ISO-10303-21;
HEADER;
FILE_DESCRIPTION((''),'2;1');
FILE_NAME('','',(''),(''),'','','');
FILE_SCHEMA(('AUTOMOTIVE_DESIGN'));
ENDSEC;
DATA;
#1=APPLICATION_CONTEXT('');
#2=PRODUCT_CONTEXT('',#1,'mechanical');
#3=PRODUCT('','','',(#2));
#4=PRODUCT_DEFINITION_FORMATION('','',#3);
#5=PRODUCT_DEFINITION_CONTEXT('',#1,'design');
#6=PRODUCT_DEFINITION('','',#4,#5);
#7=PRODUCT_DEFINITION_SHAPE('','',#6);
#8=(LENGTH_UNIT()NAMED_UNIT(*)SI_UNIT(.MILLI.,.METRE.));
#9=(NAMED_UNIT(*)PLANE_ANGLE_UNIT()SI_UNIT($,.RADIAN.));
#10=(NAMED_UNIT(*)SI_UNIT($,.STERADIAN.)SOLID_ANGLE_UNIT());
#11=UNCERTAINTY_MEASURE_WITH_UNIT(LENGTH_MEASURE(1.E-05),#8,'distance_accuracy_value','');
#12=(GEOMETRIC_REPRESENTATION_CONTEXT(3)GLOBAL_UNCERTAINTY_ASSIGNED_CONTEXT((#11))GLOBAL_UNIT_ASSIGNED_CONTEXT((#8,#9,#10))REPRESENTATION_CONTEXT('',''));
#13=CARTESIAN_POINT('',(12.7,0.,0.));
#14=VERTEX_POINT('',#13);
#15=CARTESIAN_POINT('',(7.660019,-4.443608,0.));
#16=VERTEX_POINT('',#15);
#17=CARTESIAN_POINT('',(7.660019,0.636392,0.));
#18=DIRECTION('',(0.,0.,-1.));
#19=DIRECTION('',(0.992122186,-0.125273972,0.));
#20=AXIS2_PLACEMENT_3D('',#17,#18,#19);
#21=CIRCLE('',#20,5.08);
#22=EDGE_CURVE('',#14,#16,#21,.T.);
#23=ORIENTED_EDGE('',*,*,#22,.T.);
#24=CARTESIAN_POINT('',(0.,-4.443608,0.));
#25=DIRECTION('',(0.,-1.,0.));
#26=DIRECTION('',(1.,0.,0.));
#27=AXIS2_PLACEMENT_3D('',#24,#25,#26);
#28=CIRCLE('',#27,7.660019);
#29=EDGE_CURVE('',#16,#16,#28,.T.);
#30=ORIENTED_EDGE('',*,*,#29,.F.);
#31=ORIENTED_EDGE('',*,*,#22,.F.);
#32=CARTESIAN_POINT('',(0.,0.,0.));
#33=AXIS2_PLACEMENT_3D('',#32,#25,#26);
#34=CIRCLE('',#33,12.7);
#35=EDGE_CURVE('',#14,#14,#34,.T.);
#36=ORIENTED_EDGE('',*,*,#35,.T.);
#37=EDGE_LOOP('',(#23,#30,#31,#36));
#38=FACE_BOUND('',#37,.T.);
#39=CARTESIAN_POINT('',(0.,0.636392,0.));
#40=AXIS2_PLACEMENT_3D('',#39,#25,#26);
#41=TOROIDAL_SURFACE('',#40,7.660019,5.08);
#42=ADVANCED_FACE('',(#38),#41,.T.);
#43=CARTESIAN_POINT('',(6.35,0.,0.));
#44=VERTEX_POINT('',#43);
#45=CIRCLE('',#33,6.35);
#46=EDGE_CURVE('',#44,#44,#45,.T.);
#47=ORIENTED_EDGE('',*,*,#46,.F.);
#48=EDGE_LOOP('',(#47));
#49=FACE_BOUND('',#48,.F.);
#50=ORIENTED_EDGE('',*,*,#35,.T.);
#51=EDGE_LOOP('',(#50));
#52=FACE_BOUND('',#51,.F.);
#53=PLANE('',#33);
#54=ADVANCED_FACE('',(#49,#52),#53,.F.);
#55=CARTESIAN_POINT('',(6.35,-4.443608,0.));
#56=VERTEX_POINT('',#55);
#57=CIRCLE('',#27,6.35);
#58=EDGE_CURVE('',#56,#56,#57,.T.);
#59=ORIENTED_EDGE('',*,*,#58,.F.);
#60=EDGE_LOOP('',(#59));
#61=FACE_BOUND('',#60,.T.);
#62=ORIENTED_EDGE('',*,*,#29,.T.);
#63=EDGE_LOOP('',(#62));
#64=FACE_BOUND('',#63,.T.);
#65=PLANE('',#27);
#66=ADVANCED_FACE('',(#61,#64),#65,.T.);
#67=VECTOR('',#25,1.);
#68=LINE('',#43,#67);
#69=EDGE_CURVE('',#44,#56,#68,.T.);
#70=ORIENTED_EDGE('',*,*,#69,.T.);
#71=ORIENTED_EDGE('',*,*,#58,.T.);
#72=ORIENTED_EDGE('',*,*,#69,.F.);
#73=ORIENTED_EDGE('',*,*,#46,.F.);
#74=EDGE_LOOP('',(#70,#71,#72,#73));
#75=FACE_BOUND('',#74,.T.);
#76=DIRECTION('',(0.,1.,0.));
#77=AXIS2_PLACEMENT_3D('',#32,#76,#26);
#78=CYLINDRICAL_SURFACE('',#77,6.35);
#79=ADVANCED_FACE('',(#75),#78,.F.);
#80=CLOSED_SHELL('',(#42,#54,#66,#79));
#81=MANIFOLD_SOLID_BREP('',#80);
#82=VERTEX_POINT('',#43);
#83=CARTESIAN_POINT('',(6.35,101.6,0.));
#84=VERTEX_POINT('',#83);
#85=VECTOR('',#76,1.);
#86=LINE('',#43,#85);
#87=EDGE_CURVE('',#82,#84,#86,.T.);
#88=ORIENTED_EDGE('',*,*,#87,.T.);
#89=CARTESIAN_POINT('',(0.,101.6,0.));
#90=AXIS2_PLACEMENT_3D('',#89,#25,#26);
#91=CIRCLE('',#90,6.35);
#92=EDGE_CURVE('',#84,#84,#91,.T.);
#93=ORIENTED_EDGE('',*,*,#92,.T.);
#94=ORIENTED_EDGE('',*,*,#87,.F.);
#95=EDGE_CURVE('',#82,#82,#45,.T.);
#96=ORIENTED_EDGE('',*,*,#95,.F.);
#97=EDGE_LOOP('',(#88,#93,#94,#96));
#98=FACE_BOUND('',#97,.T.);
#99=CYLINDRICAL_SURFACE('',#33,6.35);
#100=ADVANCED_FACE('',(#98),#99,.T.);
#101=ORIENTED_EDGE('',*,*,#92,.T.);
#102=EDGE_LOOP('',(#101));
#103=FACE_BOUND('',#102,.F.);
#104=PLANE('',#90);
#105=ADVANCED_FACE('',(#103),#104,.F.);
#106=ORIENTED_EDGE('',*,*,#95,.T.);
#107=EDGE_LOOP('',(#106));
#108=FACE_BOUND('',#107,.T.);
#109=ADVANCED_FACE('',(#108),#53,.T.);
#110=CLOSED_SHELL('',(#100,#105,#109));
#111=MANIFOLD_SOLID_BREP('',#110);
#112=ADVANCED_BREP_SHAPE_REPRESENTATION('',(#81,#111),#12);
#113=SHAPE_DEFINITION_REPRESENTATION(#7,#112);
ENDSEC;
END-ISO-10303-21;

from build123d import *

# Parameters (mm, degrees)
F0_R     = 12.7
F0_R_2   = 6.35
F1_DEPTH = 4.4436082244
F3_R     = 6.35
F4_DEPTH = 101.6


# Not quite as in the source:
# - a fillet or chamfer that OpenCascade refuses, or shapes differently, is made with other operations: its cross-section is extruded or revolved along the edge and cut away or added


with BuildPart() as f1:
    # F0 (on Front) → F1 (new body)
    with BuildSketch(Plane.XZ):
        Circle(F0_R)
        Circle(F0_R_2, mode=Mode.SUBTRACT)
    extrude(amount=F1_DEPTH)

    # F2: fillet of radius 5.08 on 1 edges, made by hand

    # F2_s1 → F2_t2 (revolve, cut)
    with BuildSketch(Plane.XY):
        with BuildLine():
            ThreePointArc((12.7, 0), (11.019597377, -3.1740721214), (7.6600192949, -4.4436082244))
            Line((7.6600192949, -4.4436082244), (12.7, -4.4436082244))
            Line((12.7, -4.4436082244), (12.7, 0))
        make_face()
    revolve(axis=Axis((0, -4.4436082244, 0), (0, -1, 0)), mode=Mode.SUBTRACT)


with BuildPart() as f4:
    # F3 (on Front) → F4 (new body)
    with BuildSketch(Plane.XZ):
        Circle(F3_R)
    extrude(amount=-F4_DEPTH)


solid = Compound([f1.part, f4.part])
